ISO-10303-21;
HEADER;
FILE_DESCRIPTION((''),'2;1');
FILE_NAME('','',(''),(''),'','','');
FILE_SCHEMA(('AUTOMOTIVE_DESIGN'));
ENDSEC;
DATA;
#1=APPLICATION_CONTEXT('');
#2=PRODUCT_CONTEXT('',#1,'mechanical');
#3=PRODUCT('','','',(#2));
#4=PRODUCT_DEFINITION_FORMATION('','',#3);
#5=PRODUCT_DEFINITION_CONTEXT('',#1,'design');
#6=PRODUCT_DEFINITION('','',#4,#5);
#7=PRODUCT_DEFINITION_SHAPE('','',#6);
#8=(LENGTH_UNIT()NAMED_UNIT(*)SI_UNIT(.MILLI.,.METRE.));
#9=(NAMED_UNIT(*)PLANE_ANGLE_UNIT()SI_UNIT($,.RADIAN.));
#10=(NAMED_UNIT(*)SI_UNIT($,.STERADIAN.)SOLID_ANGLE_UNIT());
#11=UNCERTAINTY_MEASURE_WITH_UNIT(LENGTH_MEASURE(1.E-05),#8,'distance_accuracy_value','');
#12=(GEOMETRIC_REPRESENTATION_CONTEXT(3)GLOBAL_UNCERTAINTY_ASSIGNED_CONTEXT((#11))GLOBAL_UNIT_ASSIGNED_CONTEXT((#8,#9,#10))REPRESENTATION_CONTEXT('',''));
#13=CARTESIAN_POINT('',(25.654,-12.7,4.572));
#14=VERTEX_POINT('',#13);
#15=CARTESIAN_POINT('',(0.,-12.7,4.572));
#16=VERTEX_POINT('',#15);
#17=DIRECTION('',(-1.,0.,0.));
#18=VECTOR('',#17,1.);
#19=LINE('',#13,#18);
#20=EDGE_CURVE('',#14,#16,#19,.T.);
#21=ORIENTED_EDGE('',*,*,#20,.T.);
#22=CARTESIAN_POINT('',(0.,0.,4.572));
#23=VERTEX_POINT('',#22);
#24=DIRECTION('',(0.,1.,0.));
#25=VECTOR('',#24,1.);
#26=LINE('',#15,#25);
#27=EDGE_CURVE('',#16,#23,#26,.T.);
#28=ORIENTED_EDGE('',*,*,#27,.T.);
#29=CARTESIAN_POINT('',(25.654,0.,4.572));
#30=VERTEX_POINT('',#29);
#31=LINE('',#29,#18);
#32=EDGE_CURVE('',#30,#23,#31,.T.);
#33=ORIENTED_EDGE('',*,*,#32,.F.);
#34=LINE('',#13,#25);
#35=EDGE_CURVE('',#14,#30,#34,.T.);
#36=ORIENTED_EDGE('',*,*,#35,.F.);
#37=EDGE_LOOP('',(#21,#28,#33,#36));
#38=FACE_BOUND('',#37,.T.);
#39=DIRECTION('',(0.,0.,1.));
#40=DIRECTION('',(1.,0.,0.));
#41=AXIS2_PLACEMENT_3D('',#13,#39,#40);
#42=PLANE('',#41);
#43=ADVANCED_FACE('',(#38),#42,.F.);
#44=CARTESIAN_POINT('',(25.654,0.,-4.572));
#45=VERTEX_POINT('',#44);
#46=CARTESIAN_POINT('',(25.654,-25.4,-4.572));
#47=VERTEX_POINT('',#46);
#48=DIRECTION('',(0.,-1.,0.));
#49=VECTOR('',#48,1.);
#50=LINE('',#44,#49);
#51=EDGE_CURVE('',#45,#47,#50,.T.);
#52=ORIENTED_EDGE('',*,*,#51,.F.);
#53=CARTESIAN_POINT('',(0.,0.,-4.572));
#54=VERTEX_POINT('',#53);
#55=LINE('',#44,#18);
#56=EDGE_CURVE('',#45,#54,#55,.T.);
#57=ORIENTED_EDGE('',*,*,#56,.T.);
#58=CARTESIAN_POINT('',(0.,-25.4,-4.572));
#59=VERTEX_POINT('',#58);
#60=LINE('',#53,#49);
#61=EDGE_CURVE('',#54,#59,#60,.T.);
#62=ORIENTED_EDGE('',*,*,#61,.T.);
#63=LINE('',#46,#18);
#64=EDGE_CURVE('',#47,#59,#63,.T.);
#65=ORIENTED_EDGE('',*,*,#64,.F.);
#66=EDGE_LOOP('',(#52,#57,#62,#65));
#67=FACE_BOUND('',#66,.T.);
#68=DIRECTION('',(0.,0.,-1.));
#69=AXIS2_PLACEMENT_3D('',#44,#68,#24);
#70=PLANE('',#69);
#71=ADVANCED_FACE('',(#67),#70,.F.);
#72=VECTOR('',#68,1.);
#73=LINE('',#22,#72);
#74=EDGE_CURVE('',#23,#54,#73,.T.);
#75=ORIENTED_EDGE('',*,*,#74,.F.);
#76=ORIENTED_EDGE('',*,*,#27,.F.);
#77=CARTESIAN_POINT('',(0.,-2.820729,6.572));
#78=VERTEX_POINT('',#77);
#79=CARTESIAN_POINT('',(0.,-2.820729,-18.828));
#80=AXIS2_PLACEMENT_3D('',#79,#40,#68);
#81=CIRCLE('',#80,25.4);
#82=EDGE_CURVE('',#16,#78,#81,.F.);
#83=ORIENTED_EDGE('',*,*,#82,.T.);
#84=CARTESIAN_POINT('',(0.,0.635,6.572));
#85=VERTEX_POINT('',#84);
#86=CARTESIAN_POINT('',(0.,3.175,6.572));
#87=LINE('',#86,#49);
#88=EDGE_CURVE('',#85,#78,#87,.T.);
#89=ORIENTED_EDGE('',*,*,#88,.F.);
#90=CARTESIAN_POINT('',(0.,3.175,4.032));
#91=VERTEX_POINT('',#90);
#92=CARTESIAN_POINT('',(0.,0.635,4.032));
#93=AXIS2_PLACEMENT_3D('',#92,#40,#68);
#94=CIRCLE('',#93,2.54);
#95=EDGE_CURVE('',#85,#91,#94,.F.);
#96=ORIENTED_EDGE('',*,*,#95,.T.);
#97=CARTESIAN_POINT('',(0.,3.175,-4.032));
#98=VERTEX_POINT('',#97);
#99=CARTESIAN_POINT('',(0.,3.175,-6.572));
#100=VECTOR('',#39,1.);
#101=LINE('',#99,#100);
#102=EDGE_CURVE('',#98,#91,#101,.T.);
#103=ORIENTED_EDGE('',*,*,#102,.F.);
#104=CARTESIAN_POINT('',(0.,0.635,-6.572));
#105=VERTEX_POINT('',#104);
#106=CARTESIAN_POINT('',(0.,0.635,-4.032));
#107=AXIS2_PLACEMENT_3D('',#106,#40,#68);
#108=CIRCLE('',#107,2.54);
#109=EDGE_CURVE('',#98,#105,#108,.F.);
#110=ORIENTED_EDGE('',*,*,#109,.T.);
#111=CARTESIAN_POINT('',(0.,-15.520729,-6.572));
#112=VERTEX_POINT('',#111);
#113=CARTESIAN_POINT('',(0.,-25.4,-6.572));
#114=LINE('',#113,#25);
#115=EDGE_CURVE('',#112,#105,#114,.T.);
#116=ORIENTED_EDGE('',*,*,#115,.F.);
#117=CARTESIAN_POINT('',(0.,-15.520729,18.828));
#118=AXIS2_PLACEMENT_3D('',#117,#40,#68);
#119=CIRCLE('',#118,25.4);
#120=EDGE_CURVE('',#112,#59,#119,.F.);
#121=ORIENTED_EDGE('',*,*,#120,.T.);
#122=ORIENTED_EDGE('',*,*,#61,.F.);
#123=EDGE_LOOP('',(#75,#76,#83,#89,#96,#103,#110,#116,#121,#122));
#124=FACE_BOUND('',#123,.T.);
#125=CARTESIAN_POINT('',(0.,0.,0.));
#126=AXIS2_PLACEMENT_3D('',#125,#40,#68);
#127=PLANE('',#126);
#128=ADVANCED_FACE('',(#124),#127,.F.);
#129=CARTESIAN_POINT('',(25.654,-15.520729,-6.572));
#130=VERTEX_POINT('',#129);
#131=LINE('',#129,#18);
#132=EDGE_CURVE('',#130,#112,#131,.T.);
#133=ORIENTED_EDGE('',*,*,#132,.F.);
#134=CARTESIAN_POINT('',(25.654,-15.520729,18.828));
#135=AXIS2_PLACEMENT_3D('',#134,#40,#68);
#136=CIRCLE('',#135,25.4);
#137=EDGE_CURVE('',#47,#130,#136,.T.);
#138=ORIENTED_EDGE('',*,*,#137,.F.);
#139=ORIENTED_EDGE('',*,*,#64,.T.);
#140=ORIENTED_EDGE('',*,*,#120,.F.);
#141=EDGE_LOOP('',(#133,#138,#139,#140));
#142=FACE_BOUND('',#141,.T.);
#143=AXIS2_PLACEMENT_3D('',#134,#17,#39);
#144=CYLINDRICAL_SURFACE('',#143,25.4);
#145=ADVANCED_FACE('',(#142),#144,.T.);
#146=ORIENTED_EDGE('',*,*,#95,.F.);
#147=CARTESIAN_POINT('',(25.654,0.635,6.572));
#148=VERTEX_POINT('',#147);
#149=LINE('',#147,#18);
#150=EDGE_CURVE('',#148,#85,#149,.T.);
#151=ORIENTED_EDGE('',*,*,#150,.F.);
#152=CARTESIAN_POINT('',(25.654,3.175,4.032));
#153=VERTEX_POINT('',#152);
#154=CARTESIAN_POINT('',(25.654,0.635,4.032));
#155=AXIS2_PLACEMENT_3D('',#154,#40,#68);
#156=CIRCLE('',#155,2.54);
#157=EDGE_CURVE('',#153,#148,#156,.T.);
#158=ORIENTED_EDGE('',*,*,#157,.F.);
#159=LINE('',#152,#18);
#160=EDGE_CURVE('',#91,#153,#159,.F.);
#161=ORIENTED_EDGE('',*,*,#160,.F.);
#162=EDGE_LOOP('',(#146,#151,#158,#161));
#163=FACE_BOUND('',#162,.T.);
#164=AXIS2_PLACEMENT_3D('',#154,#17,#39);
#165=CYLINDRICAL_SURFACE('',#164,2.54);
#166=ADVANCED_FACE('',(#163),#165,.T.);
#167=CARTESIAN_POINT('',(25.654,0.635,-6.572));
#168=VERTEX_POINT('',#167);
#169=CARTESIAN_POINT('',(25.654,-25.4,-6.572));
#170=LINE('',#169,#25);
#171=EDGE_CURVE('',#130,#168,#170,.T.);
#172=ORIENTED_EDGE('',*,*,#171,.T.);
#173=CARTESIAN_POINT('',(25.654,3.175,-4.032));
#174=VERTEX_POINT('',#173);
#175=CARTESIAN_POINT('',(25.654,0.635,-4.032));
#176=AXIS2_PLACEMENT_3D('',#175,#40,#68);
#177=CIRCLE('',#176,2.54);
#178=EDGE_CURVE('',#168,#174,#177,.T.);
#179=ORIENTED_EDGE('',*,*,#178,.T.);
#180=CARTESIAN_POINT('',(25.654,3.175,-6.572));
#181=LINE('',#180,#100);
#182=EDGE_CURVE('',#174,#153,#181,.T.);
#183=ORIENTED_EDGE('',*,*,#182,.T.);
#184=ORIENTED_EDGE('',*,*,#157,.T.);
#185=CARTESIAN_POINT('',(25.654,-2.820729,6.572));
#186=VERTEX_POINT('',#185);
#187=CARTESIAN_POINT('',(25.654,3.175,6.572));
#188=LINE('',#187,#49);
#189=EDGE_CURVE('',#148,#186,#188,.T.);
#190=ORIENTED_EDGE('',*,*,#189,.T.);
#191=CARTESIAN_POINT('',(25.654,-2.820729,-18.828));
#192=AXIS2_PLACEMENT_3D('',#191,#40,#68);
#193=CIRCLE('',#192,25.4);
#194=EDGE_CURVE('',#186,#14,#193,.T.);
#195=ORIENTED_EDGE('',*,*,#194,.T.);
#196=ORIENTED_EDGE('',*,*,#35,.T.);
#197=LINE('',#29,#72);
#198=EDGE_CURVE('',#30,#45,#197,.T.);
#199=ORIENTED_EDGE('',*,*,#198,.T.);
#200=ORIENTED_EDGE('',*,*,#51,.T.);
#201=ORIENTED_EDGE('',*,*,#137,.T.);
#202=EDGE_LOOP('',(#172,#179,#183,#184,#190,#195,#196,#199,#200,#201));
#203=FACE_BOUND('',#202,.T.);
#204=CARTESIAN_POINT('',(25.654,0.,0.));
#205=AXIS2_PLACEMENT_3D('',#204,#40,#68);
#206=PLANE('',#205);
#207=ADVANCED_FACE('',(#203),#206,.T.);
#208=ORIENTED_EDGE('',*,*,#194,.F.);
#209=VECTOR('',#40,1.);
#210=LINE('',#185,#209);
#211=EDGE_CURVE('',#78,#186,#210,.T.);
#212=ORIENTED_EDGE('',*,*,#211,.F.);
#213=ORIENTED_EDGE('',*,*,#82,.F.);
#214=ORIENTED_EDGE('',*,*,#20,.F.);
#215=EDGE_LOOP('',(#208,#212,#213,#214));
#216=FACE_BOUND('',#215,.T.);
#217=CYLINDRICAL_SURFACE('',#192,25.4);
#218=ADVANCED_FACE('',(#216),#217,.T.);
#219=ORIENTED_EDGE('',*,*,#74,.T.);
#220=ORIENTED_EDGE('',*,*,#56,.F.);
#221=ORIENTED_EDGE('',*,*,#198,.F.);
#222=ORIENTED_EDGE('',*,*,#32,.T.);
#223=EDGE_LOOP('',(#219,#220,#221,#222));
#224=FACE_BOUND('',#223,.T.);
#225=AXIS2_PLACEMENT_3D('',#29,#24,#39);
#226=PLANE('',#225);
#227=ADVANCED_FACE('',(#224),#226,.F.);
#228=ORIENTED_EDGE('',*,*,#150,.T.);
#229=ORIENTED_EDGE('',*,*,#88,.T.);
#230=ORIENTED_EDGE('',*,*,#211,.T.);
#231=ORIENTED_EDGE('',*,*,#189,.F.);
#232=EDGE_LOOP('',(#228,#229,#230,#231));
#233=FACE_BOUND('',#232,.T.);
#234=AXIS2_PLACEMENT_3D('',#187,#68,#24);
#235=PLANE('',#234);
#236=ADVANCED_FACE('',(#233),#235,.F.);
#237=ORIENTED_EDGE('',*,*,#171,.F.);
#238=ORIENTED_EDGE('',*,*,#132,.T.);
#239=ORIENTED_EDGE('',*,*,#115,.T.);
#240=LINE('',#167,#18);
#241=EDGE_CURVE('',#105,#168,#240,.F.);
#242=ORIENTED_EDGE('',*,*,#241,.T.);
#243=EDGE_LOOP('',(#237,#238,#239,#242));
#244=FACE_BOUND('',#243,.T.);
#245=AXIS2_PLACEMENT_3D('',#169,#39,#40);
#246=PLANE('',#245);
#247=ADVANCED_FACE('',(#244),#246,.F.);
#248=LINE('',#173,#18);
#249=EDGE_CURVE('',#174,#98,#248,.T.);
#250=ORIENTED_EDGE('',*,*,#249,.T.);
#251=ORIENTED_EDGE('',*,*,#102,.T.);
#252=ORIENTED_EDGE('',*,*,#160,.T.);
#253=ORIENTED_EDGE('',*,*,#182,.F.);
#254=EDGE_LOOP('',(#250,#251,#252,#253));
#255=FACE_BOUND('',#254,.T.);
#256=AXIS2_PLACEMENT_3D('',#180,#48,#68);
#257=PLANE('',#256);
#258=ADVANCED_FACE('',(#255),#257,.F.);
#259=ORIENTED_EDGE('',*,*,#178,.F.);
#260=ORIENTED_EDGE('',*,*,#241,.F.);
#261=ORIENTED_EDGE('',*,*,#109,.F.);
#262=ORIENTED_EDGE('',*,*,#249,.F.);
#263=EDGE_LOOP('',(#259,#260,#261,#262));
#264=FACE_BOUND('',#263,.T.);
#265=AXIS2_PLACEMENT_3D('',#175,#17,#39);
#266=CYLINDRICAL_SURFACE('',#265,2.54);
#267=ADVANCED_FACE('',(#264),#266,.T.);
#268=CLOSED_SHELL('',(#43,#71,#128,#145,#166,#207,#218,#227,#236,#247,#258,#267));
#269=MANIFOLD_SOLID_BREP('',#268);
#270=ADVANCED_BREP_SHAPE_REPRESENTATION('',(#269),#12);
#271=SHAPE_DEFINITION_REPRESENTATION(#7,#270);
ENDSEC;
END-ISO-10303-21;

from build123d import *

# Parameters (mm, degrees)
BOSS_EXTRUDE1_DEPTH = 25.654
FILLET1_R           = 25.4
FILLET2_R           = 2.54


with BuildPart() as part:
    # Sketch1 → Boss-Extrude1 (new body)
    with BuildSketch(Plane(origin=(0, 0, 0), x_dir=(0, 0, -1), z_dir=(1, 0, 0))):
        Polygon((-6.572, -12.7), (-4.572, -12.7), (-4.572, 0), (4.572, 0), (4.572, -25.4), (6.572, -25.4), (6.572, 3.175), (-6.572, 3.175), align=None)
    extrude(amount=BOSS_EXTRUDE1_DEPTH)

    # Fillet1
    # the kernel refuses this fillet: 25.4 mm, written as the material it takes off along each edge
    with BuildSketch(Plane(origin=(-24.69817807, -12.7, 6.572), x_dir=(0, 0, -1), z_dir=(1, 0, 0))) as fillet1_piece_1:
        with BuildLine():
            CenterArc((25.4, 9.879271228), FILLET1_R, 180, 22.889037196)
            Line((0, 9.879271228), (-0.508, 9.879271228))
            Line((-0.508, 9.879271228), (-0.508, 0))
            Line((-0.508, 0), (0, -0.508))
            ThreePointArc((0, -0.508), (1, -0.508), (1.532, -0.197585425))
            Line((1.532, -0.197585425), (2, 0))
        make_face()
    extrude(amount=75.050356141, mode=Mode.SUBTRACT)
    with BuildSketch(Plane(origin=(-24.69817807, -25.4, -6.572), x_dir=(0, 0, 1), z_dir=(1, 0, 0))) as fillet1_piece_2:
        with BuildLine():
            CenterArc((25.4, -9.879271228), FILLET1_R, 157.110962804, 22.889037196)
            Line((0, -9.879271228), (-0.508, -9.879271228))
            Line((-0.508, -9.879271228), (-0.508, 0))
            Line((-0.508, 0), (0, 0.508))
            ThreePointArc((0, 0.508), (1, 0.508), (1.532, 0.197585425))
            Line((1.532, 0.197585425), (2, 0))
        make_face()
    extrude(amount=75.050356141, mode=Mode.SUBTRACT)

    # Fillet2
    fillet2_edges = [part.edges().sort_by_distance(p)[0] for p in [
        (12.827, 3.175, 6.572),
        (12.827, 3.175, -6.572),
    ]]
    fillet(fillet2_edges, radius=FILLET2_R)


solid = part.part
